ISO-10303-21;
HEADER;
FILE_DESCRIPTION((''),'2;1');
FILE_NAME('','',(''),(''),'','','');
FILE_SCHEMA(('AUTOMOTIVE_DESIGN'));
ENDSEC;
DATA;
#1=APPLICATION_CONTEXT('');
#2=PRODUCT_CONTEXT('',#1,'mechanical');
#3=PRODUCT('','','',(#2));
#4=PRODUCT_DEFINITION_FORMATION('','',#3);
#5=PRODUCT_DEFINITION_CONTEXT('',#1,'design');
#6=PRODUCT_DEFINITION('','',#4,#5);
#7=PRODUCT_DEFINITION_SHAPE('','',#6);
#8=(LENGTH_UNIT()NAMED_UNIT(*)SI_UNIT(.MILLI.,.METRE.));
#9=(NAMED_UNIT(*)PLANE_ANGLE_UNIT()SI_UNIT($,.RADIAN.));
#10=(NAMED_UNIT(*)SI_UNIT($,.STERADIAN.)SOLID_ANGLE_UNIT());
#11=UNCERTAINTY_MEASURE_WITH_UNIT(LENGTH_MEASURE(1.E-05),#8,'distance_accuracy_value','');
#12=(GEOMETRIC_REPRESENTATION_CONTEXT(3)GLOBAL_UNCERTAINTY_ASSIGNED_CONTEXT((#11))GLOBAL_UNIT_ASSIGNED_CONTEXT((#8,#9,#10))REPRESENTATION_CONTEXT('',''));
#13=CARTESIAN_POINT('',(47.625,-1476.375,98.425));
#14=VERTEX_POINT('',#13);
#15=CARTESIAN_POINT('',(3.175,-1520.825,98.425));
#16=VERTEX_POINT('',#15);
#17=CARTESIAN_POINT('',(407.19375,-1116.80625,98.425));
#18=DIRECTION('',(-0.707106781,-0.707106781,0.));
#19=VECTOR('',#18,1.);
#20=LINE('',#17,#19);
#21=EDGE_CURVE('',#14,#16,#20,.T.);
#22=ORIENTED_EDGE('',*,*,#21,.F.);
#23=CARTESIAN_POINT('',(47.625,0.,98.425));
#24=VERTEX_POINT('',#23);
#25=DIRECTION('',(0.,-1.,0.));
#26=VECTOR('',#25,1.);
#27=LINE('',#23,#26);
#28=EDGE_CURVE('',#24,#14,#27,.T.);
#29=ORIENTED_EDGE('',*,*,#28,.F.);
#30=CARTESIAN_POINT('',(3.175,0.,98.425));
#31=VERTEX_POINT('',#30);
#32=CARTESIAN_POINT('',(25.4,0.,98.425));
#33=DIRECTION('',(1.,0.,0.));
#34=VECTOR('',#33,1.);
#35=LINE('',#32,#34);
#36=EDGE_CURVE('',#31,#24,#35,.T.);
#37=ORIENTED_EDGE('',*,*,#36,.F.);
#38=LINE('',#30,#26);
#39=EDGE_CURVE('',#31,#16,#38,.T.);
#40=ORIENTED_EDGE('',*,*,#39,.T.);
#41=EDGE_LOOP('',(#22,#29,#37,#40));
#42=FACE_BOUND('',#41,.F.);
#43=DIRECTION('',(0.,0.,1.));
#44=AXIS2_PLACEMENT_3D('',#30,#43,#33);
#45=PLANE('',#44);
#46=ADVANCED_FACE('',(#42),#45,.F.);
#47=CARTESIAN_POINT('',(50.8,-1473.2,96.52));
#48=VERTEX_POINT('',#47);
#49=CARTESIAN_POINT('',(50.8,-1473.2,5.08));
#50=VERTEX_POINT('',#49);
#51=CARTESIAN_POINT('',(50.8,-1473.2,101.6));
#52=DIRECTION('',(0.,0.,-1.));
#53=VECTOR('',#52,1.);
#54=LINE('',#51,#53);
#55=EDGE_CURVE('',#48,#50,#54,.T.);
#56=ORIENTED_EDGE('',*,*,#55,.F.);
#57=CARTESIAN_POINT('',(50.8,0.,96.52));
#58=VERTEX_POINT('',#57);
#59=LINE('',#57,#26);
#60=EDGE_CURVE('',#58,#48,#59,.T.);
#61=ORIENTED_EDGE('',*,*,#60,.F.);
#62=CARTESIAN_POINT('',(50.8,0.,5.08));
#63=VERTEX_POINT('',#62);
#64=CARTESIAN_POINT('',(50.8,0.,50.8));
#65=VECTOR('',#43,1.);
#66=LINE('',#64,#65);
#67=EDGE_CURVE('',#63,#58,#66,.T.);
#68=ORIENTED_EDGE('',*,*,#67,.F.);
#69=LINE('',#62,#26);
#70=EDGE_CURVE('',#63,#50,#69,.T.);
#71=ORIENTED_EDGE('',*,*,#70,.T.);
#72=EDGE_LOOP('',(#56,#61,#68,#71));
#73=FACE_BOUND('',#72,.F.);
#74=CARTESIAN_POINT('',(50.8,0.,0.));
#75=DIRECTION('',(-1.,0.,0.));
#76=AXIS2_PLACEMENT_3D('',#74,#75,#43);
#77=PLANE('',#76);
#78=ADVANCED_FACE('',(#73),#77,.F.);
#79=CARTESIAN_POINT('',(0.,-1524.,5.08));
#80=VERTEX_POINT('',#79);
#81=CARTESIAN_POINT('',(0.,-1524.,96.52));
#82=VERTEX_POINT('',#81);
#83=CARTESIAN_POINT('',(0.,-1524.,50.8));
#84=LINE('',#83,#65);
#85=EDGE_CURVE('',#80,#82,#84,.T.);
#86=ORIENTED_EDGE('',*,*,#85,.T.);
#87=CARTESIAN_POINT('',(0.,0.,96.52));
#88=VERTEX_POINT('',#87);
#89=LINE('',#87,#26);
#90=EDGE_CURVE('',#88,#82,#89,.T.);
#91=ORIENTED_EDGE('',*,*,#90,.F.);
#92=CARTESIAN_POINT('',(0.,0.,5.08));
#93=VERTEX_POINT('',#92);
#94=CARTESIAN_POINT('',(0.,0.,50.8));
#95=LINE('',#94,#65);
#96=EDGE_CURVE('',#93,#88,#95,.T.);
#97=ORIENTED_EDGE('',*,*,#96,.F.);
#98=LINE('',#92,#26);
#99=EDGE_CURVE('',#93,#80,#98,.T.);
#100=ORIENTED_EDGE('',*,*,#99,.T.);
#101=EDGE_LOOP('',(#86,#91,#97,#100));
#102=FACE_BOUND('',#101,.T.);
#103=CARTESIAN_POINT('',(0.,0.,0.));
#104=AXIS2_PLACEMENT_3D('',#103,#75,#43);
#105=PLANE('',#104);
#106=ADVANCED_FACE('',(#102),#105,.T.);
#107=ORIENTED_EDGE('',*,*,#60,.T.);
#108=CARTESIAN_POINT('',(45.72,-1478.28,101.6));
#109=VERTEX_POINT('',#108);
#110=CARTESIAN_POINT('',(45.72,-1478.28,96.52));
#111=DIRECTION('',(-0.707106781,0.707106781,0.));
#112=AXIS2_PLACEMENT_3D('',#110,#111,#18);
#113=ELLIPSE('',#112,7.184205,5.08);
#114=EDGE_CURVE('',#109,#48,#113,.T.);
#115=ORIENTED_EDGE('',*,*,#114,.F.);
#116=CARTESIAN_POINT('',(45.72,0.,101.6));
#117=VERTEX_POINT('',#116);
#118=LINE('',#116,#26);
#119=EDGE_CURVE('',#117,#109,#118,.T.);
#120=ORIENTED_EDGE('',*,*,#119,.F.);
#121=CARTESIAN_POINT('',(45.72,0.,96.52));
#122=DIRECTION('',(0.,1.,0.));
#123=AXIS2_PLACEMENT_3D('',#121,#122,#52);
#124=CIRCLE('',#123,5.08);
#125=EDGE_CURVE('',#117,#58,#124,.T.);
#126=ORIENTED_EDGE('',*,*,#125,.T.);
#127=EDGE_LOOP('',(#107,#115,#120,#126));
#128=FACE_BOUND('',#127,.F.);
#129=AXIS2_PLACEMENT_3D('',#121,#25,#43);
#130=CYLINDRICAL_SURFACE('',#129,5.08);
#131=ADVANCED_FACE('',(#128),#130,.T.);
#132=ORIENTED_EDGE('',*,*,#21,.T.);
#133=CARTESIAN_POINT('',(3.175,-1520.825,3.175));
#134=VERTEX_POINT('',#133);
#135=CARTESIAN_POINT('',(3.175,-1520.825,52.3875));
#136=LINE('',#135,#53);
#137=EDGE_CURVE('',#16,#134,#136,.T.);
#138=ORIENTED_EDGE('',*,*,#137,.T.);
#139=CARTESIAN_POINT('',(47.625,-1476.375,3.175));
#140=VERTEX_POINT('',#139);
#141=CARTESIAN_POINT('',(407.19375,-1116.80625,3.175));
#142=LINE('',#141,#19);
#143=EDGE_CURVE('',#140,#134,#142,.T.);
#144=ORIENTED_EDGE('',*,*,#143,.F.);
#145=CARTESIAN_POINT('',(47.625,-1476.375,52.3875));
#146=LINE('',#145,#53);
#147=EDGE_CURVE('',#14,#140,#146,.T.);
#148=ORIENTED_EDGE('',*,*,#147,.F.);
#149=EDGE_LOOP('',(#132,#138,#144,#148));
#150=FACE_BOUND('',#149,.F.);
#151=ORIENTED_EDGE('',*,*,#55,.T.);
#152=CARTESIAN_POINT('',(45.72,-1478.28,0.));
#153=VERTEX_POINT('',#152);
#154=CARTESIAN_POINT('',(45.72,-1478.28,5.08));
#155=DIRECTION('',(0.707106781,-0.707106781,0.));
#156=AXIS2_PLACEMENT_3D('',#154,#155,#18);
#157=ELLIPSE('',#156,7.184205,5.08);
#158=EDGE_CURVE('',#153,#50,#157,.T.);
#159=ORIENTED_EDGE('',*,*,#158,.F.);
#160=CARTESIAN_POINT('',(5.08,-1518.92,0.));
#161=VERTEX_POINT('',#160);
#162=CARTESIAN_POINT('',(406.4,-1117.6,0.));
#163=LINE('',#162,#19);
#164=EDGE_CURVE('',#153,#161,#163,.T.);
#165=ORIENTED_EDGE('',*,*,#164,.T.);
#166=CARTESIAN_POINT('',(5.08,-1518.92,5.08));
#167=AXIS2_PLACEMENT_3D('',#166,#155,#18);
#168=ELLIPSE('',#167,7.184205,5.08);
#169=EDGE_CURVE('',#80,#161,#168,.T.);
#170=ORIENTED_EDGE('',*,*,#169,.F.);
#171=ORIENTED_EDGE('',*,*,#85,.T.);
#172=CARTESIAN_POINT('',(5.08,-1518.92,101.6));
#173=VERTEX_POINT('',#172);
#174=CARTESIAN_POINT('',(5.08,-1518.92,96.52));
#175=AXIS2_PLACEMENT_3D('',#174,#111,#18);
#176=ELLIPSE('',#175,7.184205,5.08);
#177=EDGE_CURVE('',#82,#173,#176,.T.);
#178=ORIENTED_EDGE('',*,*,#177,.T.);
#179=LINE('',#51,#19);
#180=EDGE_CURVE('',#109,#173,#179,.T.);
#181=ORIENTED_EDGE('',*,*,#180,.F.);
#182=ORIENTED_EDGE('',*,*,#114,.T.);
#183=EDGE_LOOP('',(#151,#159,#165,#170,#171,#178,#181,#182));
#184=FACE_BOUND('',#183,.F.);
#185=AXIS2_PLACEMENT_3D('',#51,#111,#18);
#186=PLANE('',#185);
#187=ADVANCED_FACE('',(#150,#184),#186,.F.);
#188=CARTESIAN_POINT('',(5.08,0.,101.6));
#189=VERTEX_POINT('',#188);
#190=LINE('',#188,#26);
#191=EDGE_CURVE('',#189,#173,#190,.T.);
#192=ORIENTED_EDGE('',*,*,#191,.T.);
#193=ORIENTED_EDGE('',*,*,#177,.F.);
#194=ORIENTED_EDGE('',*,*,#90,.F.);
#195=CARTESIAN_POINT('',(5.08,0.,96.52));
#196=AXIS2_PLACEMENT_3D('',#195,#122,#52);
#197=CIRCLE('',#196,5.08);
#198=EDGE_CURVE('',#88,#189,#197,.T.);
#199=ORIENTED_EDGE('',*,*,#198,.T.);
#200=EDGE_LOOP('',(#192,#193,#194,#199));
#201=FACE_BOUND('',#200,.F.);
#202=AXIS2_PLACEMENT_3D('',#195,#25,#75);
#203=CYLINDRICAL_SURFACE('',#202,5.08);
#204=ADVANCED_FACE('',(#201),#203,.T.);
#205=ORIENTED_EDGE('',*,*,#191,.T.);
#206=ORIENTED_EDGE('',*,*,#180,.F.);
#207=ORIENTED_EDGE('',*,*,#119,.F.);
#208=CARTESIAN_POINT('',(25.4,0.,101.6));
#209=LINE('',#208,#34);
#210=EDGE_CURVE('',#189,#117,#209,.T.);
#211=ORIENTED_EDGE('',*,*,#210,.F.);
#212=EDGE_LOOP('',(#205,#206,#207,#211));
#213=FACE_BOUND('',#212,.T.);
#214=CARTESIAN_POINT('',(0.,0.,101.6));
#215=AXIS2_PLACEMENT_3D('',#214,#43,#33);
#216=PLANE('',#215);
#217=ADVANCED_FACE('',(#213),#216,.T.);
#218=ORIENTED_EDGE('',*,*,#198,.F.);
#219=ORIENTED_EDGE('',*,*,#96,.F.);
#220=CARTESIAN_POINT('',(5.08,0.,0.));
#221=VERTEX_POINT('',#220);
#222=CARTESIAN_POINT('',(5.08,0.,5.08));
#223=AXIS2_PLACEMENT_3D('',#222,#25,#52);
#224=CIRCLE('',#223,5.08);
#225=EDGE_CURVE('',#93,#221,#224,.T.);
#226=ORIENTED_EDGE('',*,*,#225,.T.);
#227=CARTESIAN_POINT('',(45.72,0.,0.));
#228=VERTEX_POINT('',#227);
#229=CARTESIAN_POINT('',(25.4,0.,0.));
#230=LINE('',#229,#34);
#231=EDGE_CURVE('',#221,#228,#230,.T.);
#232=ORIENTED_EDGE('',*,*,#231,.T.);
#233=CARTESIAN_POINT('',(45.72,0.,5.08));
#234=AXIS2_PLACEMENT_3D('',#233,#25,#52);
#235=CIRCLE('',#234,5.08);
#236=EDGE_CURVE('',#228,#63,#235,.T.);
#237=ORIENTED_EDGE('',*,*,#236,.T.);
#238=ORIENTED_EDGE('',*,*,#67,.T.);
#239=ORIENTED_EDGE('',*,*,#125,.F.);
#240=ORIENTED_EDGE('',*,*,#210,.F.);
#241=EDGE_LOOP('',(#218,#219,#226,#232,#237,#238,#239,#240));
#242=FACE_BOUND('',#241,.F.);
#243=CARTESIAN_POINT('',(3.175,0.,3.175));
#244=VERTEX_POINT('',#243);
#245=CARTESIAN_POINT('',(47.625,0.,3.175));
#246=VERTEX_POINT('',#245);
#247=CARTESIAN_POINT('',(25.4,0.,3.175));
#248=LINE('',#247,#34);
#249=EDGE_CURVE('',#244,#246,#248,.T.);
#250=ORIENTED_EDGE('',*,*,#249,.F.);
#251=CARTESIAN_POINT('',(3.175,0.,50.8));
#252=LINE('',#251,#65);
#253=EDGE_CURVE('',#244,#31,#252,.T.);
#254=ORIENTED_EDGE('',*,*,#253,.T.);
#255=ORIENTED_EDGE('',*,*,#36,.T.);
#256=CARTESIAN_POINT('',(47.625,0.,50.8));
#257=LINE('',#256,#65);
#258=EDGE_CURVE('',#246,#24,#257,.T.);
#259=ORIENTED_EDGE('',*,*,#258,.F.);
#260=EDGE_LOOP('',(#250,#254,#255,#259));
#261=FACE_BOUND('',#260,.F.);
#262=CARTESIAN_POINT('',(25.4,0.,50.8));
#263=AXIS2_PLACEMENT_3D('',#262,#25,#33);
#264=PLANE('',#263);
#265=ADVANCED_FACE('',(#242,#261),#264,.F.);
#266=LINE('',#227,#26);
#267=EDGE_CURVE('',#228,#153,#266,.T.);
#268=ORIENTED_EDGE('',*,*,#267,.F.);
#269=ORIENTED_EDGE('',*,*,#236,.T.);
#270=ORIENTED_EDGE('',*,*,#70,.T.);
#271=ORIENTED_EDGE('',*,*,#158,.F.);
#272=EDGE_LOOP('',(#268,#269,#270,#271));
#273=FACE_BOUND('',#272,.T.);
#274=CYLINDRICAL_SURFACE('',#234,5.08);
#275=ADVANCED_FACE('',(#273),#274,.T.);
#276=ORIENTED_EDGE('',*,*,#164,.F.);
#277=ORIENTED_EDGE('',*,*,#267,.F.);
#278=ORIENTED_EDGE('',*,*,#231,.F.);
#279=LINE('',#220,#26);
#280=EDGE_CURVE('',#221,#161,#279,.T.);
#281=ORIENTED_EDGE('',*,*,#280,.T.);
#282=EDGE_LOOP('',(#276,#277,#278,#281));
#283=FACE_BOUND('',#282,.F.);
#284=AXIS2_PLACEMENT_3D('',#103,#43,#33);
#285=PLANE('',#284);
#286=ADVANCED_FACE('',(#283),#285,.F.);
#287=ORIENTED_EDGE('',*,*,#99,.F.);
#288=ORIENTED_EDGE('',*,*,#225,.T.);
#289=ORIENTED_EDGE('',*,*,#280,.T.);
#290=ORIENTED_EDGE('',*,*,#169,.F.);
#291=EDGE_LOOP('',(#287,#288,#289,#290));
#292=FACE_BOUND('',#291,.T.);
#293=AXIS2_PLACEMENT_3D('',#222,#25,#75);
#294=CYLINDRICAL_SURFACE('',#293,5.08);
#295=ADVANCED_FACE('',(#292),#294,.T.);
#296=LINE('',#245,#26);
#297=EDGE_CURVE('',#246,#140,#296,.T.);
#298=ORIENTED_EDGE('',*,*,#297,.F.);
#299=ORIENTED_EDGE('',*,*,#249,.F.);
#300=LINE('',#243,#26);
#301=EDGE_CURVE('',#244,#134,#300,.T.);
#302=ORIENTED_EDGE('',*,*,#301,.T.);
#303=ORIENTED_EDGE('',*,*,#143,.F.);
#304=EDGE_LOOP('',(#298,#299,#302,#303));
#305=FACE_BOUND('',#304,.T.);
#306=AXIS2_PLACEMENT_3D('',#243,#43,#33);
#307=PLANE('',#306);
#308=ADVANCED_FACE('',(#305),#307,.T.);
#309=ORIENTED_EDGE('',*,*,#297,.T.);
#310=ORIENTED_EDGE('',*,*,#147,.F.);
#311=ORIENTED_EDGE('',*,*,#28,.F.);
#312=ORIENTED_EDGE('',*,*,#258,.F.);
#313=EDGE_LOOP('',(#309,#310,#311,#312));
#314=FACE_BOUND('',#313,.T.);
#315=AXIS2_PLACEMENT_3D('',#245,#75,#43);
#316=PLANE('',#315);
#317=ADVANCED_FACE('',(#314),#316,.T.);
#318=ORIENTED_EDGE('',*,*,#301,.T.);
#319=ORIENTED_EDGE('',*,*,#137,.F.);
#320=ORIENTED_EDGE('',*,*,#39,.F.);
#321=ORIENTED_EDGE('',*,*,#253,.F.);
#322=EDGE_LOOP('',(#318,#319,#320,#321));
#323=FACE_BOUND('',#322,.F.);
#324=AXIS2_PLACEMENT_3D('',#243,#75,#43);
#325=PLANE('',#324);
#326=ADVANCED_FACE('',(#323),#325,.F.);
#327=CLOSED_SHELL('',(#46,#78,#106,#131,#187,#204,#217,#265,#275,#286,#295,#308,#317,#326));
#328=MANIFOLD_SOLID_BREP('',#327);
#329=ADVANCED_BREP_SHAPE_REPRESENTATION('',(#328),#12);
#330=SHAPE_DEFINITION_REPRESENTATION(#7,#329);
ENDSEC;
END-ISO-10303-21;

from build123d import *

# Parameters (mm, degrees)
F0_W     = 50.8
F0_H     = 101.6
F0_W_2   = 44.45
F0_H_2   = 95.25
F1_DEPTH = 1524
F3_DEPTH = 173.228
F4_R     = 5.08


# Not quite as in the source:
# - a feature names something its author has since deleted; it is built from what else it names


with BuildPart() as f1:
    # F0 (on Front) → F1 (new body)
    with BuildSketch(Plane.XZ):
        with Locations((25.4, 50.8)):
            Rectangle(F0_W, F0_H)
        with Locations((25.4, 50.8)):
            Rectangle(F0_W_2, F0_H_2, mode=Mode.SUBTRACT)
    extrude(amount=F1_DEPTH)

    # F2 (on face) → F3 (cut)
    with BuildSketch(Plane.XY.offset(101.6)):
        Polygon((50.8, -1473.2), (0, -1524), (50.8, -1524), align=None)
    extrude(amount=-F3_DEPTH, mode=Mode.SUBTRACT)

    # F4
    f4_edges = [f1.edges().sort_by_distance(p)[0] for p in [
        (0, -762, 0),
        (50.8, -736.6, 0),
        (50.8, -736.6, 101.6),
        (0, -762, 101.6),
    ]]
    fillet(f4_edges, radius=F4_R)


solid = f1.part
